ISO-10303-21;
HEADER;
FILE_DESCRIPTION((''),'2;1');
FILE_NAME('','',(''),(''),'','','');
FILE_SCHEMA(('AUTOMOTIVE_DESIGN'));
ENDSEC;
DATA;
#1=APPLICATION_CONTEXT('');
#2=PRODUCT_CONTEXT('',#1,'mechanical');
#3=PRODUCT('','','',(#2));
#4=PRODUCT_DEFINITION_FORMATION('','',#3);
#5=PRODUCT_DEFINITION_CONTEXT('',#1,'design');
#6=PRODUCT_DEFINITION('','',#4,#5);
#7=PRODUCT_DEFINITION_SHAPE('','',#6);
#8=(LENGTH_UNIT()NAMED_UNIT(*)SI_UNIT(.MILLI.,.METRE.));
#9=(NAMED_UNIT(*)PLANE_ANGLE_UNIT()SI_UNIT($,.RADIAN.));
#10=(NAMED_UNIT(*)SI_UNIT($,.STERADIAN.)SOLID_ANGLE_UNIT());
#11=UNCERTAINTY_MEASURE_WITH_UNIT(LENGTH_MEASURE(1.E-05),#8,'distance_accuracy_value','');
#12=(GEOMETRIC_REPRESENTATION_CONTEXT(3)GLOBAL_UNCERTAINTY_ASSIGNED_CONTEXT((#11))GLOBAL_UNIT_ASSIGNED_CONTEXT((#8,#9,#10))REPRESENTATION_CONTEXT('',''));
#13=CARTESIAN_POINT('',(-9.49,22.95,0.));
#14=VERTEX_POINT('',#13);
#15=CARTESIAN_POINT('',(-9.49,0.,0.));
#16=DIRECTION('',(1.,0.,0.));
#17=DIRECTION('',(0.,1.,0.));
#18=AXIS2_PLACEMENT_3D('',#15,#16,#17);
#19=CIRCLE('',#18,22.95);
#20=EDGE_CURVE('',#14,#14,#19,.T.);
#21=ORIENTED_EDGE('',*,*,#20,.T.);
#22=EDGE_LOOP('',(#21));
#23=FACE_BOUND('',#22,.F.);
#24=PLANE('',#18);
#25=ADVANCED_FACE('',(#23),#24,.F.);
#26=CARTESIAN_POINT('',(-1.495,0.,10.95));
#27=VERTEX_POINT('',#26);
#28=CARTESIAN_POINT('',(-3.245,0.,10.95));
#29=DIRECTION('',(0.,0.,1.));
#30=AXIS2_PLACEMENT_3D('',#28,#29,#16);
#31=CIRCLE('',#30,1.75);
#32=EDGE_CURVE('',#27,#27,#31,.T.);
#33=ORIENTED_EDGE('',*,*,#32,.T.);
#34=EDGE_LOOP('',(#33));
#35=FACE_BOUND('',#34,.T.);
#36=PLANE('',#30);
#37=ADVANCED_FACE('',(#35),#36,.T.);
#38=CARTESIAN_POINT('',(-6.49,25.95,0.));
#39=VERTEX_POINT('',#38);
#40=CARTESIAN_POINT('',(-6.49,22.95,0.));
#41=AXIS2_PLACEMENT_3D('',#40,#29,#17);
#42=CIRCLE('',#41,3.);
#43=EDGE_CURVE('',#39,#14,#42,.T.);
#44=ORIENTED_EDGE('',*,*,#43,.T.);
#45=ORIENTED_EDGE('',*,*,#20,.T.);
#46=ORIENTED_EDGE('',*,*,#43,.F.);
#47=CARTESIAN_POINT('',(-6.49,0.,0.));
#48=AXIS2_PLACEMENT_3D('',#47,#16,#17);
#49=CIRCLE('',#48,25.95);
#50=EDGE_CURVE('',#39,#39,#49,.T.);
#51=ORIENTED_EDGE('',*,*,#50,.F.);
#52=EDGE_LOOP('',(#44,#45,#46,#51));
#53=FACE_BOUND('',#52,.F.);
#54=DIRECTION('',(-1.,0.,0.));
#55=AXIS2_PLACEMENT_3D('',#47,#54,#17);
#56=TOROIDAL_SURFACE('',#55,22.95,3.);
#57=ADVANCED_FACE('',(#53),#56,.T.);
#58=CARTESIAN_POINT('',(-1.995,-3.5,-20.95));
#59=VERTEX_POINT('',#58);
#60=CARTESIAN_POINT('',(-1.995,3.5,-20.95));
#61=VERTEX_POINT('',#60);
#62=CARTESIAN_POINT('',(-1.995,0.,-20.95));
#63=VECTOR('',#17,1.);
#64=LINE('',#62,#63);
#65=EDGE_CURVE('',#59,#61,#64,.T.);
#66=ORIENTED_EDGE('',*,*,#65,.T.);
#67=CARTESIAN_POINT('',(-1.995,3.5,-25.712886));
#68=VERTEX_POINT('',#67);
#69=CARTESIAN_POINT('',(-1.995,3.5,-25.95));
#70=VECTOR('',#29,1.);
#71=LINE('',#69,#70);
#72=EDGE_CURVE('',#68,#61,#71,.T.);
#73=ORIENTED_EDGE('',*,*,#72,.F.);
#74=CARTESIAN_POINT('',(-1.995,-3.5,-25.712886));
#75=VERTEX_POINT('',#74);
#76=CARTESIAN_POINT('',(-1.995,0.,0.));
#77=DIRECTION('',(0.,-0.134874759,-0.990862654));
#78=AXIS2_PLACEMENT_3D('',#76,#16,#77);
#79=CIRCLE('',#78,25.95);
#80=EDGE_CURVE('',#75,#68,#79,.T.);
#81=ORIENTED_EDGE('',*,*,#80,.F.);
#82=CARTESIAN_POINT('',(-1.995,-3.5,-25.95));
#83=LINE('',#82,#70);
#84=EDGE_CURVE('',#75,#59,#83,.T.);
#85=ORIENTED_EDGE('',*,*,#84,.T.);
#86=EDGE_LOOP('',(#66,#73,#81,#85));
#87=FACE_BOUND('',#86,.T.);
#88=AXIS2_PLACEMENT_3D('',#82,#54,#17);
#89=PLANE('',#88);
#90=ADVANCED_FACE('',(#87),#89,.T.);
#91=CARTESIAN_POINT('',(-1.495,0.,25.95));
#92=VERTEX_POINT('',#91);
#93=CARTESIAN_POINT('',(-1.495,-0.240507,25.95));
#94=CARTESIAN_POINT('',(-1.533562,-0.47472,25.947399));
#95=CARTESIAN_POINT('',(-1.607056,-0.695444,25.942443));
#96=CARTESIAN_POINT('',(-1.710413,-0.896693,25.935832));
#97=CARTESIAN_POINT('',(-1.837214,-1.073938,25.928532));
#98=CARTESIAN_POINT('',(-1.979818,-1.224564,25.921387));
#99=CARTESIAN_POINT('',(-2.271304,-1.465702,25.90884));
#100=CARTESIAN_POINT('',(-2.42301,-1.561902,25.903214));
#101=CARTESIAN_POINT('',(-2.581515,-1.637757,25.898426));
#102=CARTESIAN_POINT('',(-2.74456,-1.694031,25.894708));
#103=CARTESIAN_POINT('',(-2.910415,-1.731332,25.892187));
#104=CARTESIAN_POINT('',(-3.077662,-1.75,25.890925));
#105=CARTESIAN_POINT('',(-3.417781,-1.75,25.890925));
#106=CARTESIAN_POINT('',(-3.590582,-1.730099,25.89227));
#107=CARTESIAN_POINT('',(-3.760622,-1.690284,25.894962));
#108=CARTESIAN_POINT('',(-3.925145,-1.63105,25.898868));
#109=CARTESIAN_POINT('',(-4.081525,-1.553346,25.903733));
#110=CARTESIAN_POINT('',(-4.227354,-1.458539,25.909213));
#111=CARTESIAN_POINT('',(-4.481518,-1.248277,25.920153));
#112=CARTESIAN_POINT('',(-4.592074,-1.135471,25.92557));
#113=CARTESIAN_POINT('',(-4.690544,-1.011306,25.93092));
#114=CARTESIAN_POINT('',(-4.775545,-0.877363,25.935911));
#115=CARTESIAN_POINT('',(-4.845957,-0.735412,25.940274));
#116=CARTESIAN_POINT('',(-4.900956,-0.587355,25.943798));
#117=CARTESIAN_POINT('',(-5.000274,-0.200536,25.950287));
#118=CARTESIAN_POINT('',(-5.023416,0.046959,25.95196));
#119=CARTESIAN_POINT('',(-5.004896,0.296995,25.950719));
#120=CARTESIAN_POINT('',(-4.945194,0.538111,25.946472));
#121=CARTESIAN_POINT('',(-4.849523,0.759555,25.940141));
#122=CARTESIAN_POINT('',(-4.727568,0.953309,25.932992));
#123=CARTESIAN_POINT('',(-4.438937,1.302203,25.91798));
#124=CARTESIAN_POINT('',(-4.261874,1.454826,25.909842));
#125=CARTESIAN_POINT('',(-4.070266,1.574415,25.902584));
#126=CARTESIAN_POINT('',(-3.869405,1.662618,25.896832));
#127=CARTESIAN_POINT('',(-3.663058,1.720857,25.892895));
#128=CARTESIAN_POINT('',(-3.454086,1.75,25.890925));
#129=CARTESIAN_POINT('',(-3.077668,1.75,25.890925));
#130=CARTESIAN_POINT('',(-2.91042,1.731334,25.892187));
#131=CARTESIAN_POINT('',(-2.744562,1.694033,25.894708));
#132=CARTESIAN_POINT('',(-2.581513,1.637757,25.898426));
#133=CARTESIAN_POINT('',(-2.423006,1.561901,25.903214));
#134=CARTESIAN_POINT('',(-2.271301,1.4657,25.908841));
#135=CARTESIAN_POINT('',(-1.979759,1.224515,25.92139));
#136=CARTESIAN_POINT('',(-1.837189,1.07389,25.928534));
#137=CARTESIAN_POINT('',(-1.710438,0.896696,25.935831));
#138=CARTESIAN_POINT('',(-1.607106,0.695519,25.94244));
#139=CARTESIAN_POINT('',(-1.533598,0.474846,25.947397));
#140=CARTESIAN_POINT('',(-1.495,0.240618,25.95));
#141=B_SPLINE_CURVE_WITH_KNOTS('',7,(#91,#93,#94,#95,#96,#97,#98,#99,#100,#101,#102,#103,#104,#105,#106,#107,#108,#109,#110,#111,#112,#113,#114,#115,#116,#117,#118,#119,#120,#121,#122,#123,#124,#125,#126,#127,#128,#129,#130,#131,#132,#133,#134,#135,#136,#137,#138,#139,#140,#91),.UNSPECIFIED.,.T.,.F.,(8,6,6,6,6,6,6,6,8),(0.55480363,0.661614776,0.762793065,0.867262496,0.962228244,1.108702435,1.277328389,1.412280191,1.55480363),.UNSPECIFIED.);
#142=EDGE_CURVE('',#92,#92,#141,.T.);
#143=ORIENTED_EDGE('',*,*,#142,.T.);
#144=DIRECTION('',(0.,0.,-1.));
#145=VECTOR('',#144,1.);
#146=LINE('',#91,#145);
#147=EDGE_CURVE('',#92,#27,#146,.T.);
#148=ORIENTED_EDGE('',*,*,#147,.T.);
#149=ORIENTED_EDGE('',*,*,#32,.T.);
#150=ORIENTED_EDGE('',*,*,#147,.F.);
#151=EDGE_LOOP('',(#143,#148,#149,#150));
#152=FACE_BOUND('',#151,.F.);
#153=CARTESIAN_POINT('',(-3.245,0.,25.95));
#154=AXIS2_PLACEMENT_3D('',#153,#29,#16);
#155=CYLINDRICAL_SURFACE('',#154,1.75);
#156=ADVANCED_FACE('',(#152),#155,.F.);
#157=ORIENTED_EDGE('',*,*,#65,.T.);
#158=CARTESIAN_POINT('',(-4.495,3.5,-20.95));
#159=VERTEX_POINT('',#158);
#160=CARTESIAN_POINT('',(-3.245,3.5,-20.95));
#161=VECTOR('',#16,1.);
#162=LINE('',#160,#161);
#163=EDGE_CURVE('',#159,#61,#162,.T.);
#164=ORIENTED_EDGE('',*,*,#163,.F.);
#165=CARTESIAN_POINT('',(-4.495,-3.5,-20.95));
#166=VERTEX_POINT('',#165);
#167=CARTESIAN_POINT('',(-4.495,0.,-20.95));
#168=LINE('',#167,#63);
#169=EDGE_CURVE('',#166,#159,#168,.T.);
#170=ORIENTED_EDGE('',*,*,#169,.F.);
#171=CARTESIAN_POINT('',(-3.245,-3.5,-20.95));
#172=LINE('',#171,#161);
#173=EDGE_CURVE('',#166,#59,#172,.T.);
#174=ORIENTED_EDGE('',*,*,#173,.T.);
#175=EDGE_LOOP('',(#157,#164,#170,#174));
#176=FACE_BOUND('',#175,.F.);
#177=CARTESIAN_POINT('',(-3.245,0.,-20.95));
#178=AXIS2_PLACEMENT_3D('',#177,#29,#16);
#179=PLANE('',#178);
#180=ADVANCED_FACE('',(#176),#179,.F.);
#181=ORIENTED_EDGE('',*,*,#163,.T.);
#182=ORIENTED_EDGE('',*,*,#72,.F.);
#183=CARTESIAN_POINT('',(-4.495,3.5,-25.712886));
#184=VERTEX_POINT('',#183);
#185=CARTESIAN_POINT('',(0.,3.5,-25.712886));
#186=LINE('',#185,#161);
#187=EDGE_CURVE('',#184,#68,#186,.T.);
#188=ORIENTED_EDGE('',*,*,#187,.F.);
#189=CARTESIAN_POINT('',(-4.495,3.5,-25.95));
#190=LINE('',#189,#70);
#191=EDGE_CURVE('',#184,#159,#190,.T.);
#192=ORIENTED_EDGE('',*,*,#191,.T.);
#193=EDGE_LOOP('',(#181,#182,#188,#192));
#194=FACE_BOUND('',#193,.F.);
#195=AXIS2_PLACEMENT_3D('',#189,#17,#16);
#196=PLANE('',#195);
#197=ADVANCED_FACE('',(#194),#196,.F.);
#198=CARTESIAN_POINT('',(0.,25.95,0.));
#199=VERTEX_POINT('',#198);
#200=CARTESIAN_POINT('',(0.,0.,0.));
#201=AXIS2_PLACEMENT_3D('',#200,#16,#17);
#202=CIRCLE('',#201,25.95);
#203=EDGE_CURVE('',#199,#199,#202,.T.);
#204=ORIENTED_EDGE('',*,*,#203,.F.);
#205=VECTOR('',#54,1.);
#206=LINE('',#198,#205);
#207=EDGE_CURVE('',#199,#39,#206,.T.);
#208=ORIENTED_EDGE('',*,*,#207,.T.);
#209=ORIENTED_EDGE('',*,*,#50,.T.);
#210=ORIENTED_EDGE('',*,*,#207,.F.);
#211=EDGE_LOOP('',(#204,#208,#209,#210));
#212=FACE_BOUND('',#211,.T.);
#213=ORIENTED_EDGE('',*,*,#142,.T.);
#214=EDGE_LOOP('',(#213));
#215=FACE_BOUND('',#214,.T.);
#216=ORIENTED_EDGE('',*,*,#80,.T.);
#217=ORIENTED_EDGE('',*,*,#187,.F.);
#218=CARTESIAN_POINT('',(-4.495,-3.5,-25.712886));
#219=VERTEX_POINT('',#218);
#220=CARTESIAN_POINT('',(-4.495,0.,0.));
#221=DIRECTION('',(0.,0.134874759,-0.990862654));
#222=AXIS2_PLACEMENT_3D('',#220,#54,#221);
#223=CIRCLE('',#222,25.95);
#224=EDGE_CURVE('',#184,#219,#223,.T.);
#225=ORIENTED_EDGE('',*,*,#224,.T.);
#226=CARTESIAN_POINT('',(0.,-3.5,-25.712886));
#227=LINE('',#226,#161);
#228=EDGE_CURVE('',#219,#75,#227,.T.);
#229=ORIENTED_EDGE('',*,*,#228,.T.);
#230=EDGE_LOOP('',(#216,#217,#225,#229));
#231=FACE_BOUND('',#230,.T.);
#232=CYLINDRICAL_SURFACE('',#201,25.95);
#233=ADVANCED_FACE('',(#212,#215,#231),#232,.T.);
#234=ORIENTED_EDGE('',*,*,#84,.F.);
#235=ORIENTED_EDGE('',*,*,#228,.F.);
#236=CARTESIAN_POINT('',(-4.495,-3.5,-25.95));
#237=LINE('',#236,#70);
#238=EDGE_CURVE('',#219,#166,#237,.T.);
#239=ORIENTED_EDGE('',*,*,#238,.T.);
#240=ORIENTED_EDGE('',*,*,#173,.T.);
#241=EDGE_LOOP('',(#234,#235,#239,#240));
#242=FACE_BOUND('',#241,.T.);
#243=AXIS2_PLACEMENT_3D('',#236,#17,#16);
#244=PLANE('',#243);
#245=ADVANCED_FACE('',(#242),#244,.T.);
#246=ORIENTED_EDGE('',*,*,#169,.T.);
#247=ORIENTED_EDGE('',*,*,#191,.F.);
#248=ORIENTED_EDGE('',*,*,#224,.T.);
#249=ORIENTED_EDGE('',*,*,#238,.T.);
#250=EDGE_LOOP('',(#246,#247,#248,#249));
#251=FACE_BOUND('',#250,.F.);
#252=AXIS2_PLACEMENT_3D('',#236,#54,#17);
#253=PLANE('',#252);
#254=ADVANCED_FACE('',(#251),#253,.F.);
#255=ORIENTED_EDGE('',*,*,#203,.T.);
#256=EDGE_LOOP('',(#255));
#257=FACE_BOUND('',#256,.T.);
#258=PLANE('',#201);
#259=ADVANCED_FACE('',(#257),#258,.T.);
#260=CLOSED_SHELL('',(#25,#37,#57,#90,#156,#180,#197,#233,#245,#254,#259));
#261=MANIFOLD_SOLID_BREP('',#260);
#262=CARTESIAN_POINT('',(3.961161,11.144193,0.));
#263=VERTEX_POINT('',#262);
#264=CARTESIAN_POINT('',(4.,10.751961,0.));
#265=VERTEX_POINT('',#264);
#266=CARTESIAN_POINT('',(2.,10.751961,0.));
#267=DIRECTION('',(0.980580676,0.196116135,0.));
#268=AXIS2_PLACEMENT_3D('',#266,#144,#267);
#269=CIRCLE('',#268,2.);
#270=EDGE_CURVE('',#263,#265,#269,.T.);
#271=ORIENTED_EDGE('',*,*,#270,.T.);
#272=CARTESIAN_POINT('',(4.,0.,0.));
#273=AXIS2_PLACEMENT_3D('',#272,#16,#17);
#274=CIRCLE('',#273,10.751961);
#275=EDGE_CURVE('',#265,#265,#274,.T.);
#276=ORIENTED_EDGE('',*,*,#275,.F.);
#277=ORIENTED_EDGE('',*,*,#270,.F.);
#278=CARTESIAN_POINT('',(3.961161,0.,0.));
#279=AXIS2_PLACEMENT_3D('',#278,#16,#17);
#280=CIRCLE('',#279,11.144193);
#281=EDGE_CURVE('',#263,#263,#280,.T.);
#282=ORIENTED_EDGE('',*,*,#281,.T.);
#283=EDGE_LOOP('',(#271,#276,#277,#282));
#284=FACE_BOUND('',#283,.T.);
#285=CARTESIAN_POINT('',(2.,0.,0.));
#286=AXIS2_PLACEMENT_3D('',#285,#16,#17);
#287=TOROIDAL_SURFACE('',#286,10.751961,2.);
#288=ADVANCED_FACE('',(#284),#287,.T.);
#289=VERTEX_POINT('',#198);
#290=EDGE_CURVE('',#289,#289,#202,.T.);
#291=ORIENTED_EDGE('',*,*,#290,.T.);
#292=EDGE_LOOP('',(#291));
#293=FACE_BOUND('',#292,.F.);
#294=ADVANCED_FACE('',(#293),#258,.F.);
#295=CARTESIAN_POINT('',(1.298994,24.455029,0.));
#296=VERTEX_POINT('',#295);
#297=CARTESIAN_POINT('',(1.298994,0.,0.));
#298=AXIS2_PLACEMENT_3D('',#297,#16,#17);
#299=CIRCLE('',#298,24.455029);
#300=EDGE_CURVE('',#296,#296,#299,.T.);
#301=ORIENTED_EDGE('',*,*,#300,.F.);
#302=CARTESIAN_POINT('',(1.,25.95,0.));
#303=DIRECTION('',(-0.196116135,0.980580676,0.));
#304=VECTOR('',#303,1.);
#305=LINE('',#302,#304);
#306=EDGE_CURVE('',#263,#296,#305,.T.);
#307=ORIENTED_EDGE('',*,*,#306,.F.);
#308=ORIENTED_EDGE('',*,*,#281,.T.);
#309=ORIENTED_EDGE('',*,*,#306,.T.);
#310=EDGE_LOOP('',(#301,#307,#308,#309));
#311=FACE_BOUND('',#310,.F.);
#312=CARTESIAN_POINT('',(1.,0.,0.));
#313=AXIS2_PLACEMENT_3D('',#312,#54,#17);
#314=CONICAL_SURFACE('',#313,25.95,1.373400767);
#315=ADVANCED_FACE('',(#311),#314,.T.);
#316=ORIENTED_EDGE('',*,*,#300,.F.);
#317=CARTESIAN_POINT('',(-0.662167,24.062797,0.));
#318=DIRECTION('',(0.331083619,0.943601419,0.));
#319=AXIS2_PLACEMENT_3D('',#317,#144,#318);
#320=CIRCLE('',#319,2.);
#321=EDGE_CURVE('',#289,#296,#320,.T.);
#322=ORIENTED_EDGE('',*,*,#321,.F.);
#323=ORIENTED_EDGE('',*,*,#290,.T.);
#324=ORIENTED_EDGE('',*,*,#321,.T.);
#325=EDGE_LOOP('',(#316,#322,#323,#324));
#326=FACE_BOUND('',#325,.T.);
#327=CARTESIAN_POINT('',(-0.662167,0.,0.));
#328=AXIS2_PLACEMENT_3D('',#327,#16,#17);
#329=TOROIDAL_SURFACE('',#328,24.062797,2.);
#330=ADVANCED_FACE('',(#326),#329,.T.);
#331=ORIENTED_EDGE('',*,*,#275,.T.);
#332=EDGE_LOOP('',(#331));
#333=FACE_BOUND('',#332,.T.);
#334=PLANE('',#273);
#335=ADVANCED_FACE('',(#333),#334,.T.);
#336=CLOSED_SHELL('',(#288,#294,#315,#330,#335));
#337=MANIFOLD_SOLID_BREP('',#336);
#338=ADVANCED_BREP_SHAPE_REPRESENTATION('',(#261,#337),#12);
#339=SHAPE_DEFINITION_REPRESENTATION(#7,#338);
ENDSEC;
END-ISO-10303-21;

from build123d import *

# Parameters (mm, degrees)
F0_R      = 25.95
F1_DEPTH  = 4
F2_SIZE2  = 3
F2_SIZE   = 15
F3_DEPTH  = 9.49
F4_R      = 3
F7_R      = 1.75
F8_DEPTH  = 15
F10_W     = 2.5
F10_H     = 7
F11_DEPTH = 5


# Not quite as in the source:
# - a fillet or chamfer that OpenCascade refuses, or shapes differently, is made with other operations: its cross-section is extruded or revolved along the edge and cut away or added


with BuildPart() as f1:
    # F0 (on Right) → F1 (new body)
    with BuildSketch(Plane.YZ):
        Circle(F0_R)
    extrude(amount=F1_DEPTH)

    # F2
    f2_edges = [f1.edges().sort_by_distance(p)[0] for p in [
        (4, -25.95, 0),
    ]]
    f2_side = f1.faces().sort_by_distance((4, 0, 0))[0]
    chamfer(f2_edges, length=F2_SIZE, length2=F2_SIZE2, reference=f2_side)


with BuildPart() as f3:
    # F3 (new): a face of the model
    f3_faces = [f1.part.faces().sort_by_distance(p)[0] for p in [
        (0, 0, 0),
    ]]
    extrude(f3_faces, amount=F3_DEPTH)

    # F4
    f4_edges = [f3.edges().sort_by_distance(p)[0] for p in [
        (-9.49, -25.95, 0),
    ]]
    fillet(f4_edges, radius=F4_R)

    # F7 (on offset) → F8 (cut)
    with BuildSketch(Plane.XY.offset(25.95)):
        with Locations((-3.245, 0)):
            Circle(F7_R)
    extrude(amount=-F8_DEPTH, mode=Mode.SUBTRACT)

    # F10 (on offset) → F11 (cut)
    with BuildSketch(Plane.XY.offset(-25.95)):
        with Locations((-3.245, 0)):
            Rectangle(F10_W, F10_H)
    extrude(amount=F11_DEPTH, mode=Mode.SUBTRACT)


with BuildPart() as f1_1:
    add(f1.part)

    # F5: fillet of radius 2 on 2 edges, made by hand

    # F5_s1 → F5_t2 (revolve, cut)
    with BuildSketch(Plane.XY):
        with BuildLine():
            ThreePointArc((0, 25.95), (0.8475338818, 25.3745907932), (1.2989941134, 24.455029433))
            Line((1.2989941134, 24.455029433), (1, 25.95))
            Line((1, 25.95), (0, 25.95))
        make_face()
    revolve(axis=Axis((1, 0, 0), (1, 0, 0)), mode=Mode.SUBTRACT)

    # F5_s3 → F5_t4 (revolve, cut)
    with BuildSketch(Plane.XY):
        with BuildLine():
            ThreePointArc((3.9611613514, 11.1441932431), (3.9902666533, 10.9490362087), (4, 10.7519609728))
            Line((4, 10.7519609728), (4, 10.95))
            Line((4, 10.95), (3.9611613514, 11.1441932431))
        make_face()
    revolve(axis=Axis((4, 0, 0), (1, 0, 0)), mode=Mode.SUBTRACT)


solid = Compound([f3.part, f1_1.part])
